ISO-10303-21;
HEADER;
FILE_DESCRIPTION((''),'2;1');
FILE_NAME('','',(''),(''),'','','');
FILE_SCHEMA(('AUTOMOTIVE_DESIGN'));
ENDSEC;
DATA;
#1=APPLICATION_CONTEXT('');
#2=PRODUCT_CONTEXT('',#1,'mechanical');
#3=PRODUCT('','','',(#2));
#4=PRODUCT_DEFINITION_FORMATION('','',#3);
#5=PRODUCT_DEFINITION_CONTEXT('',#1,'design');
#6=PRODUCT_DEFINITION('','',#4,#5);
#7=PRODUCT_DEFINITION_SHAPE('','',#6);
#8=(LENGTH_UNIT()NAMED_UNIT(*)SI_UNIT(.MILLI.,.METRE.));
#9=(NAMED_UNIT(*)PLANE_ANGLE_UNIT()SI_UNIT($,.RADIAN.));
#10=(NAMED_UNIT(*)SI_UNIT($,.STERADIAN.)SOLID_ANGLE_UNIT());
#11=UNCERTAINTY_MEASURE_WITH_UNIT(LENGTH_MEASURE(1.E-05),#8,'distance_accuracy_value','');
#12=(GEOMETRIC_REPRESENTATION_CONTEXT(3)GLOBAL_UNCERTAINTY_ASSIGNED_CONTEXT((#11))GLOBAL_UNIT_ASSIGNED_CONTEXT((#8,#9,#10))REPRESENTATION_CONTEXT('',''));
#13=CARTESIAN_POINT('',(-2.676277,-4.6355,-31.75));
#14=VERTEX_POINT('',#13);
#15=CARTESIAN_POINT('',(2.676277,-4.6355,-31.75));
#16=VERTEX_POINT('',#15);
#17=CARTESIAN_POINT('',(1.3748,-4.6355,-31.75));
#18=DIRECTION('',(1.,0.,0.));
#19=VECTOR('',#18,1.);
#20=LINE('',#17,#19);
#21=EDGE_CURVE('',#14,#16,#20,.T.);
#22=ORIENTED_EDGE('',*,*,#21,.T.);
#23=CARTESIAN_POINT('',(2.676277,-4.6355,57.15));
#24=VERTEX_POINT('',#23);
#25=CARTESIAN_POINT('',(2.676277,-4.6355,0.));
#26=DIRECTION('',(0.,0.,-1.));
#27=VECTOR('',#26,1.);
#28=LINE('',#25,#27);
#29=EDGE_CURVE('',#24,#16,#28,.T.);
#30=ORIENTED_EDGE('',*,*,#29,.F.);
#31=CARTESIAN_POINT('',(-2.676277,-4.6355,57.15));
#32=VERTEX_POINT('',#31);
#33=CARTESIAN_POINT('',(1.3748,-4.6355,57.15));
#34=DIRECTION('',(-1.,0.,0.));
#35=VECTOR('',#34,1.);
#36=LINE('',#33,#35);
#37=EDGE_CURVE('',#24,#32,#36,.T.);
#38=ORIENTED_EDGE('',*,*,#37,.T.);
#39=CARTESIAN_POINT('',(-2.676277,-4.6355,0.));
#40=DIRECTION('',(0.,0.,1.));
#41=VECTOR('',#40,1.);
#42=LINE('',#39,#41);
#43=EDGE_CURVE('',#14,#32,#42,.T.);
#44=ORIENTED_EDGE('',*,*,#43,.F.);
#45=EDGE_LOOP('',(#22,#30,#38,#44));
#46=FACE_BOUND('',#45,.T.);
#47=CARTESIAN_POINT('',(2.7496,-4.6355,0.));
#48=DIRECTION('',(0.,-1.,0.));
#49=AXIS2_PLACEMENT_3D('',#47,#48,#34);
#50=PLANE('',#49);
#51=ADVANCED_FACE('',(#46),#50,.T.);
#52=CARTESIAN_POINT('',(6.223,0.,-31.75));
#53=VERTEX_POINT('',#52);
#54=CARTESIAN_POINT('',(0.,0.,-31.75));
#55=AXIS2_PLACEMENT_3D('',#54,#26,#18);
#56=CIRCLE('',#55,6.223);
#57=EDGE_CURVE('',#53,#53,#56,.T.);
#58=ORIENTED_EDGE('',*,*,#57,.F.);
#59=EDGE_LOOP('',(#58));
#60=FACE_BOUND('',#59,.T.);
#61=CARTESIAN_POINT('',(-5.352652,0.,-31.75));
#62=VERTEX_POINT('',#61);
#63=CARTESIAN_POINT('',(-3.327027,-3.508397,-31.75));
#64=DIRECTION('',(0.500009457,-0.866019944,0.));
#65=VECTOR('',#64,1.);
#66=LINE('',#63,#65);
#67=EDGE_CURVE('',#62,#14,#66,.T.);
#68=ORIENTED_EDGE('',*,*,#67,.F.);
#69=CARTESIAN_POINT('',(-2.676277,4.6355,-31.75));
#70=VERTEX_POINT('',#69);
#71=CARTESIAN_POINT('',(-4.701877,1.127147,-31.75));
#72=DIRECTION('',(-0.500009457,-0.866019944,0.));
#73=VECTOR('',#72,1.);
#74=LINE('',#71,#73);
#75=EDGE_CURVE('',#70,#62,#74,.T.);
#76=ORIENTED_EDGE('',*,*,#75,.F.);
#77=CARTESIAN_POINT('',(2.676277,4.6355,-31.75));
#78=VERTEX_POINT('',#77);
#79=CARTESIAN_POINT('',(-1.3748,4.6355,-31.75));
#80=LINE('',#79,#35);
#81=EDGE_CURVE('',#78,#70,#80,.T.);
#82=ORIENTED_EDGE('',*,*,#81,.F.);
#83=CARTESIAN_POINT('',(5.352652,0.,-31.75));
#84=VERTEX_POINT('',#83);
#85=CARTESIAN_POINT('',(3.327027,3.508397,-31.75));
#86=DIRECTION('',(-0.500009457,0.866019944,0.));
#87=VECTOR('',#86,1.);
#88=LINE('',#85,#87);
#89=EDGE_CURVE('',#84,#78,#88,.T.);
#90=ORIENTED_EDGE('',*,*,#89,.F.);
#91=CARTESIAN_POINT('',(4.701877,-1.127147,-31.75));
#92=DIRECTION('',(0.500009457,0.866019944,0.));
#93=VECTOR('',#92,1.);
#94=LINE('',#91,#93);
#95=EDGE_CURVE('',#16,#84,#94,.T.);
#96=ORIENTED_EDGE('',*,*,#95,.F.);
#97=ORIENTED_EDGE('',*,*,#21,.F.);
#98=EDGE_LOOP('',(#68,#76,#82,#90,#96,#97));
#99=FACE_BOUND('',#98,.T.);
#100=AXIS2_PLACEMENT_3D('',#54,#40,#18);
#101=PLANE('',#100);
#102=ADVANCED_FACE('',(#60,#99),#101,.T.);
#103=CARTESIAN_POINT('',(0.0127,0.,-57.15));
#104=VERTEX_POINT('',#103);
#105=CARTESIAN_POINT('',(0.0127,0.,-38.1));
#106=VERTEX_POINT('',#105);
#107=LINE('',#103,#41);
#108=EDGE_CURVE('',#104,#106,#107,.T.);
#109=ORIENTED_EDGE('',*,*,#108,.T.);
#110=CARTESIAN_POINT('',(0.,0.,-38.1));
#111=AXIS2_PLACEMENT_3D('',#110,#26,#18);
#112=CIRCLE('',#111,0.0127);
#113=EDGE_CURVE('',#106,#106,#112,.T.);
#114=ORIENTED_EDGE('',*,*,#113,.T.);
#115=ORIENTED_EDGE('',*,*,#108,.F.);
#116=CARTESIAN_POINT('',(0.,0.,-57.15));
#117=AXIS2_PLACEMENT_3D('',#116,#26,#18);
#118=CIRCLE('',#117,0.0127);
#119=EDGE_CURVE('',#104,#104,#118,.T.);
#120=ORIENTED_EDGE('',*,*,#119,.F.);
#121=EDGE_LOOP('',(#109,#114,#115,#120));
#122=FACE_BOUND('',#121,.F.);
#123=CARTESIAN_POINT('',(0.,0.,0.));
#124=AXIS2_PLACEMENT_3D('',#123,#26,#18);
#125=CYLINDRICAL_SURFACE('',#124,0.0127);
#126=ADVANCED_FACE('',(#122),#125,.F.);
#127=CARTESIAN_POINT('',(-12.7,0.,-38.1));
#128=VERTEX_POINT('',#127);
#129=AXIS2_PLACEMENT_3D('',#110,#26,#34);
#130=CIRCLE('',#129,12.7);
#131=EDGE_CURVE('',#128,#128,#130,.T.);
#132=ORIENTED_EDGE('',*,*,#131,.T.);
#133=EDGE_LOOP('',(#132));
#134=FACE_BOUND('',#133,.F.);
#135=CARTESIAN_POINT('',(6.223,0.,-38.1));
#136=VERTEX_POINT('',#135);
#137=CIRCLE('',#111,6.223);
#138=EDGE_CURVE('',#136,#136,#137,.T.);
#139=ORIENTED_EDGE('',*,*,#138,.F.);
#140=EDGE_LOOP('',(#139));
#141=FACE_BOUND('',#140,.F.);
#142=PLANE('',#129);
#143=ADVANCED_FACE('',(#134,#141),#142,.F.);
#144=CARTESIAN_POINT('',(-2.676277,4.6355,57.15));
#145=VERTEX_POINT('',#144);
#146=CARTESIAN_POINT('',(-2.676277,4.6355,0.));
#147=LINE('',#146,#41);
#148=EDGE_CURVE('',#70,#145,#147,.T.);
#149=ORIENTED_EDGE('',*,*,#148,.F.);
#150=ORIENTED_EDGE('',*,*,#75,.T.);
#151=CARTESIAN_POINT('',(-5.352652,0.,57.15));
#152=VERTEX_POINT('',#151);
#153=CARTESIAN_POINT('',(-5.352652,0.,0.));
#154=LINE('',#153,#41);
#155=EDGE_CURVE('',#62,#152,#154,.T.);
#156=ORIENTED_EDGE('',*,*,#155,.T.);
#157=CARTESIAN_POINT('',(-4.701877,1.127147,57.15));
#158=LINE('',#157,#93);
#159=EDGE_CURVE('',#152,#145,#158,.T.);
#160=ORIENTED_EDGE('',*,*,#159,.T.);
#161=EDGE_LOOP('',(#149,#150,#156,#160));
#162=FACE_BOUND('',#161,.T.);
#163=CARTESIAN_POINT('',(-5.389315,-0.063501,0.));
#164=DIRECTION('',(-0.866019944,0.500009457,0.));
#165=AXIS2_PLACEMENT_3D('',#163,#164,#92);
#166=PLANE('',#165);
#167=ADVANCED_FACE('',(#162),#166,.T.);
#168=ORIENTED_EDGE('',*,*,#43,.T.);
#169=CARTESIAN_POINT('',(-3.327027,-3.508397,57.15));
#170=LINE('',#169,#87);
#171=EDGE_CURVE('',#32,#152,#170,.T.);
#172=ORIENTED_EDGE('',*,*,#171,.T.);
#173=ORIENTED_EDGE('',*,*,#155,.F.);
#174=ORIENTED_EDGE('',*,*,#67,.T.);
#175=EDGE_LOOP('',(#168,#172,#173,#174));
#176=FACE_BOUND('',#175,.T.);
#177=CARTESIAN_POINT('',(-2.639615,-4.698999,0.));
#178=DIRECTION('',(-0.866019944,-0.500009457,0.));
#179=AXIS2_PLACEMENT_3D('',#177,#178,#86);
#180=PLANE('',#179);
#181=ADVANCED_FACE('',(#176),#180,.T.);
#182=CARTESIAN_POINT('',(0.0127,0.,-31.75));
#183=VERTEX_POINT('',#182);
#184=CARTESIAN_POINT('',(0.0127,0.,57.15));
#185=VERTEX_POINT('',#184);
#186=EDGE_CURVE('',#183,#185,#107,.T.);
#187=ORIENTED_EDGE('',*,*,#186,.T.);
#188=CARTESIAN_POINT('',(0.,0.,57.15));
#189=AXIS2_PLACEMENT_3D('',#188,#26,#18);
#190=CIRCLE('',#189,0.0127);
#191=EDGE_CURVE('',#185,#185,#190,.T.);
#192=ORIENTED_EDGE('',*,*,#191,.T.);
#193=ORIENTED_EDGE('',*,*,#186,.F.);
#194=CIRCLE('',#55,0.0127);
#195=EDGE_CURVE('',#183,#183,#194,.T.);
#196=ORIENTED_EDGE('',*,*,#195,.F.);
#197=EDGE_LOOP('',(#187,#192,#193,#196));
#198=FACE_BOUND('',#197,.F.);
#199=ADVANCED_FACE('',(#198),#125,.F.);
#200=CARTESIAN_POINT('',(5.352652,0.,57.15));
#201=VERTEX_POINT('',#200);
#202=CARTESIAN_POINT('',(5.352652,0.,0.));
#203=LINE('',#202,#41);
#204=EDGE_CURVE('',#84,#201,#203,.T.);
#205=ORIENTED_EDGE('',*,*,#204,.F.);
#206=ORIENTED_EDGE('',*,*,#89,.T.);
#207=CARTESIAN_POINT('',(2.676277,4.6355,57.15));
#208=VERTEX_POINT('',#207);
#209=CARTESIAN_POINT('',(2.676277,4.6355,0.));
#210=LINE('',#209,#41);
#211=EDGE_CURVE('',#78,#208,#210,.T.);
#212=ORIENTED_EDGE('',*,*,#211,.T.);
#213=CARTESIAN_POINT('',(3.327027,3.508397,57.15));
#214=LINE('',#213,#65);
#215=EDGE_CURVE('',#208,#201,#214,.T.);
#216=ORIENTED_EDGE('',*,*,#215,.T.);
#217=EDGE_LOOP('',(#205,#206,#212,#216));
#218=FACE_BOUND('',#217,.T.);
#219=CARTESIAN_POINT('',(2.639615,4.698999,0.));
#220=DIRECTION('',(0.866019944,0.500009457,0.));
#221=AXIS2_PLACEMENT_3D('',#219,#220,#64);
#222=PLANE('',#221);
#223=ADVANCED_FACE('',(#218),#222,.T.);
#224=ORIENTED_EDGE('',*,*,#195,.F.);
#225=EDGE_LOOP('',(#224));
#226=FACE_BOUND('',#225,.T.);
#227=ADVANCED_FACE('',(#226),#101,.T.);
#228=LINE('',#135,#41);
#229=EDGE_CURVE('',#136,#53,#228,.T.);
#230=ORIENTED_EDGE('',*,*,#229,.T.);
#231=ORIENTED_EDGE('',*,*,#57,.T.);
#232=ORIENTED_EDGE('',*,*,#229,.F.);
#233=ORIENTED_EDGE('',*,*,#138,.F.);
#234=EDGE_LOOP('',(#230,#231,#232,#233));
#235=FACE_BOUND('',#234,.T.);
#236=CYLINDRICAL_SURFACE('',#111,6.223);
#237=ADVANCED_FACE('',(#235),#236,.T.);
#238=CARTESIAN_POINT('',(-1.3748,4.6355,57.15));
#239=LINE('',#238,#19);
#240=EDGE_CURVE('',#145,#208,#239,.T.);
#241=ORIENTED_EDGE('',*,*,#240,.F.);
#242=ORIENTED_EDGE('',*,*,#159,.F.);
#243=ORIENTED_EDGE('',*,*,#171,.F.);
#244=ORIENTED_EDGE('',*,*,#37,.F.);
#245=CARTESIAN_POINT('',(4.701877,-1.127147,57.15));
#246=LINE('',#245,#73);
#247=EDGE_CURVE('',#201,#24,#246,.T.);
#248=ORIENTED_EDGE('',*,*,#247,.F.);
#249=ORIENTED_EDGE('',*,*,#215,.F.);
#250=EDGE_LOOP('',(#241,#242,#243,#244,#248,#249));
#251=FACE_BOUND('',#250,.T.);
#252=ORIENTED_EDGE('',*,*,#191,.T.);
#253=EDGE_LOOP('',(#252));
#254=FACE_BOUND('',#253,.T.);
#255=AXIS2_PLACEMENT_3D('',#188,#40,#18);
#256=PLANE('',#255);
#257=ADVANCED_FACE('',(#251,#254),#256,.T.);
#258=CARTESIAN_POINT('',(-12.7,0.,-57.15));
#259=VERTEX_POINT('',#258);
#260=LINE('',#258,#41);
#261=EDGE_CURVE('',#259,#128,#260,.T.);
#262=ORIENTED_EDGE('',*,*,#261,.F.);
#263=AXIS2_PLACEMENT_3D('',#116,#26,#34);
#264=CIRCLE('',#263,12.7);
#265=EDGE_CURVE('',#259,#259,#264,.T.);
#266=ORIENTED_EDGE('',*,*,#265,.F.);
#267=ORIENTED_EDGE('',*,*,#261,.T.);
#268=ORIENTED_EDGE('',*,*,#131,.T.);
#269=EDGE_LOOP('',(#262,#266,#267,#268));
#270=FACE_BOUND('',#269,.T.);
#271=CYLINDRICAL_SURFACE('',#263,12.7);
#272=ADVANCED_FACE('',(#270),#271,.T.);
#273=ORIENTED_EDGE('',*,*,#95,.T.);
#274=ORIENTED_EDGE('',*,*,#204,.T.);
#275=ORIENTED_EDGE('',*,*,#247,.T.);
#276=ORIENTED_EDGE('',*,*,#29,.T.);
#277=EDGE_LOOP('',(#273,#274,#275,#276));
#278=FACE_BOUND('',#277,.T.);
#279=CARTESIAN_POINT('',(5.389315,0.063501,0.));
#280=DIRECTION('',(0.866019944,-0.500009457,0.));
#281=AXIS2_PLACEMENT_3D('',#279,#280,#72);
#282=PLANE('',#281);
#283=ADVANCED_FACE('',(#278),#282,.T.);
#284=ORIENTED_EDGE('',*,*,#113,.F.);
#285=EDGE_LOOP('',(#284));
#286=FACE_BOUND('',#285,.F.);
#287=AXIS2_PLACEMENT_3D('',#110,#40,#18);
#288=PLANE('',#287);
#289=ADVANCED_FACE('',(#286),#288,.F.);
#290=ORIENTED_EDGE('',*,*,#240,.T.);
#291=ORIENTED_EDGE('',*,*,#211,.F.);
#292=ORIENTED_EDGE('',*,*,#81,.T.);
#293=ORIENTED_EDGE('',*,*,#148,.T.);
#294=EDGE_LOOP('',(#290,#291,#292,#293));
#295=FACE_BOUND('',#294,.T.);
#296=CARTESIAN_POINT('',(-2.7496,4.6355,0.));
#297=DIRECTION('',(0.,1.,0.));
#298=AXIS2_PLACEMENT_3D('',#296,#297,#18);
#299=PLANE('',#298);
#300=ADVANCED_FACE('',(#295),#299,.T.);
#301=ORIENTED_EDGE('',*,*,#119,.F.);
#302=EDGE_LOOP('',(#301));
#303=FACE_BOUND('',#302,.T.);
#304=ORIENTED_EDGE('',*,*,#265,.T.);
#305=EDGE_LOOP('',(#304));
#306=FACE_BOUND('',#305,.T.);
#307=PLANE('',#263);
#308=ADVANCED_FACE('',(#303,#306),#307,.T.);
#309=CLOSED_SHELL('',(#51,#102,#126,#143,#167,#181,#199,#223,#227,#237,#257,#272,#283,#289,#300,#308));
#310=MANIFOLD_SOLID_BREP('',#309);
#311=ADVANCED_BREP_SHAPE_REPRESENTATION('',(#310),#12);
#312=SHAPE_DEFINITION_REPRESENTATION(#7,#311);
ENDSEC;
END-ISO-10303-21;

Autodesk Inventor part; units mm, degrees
ref_plane "YZ Plane" through (0, 0, 0) normal (1, 0, 0) x (0, 1, 0)
ref_plane "XZ Plane" through (0, 0, 0) normal (0, 1, 0) x (-1, 0, 0)
ref_plane "XY Plane" through (0, 0, 0) normal (0, 0, 1) x (1, 0, 0)
sketch "Sketch1" plane through (0, 0, 0) normal (0, 0, 1) x (1, 0, 0)
  line L0 (5.4993, 0) -> (2.7496, -4.7625)
  line L1 (2.7496, -4.7625) -> (-2.7496, -4.7625)
  line L2 (-2.7496, -4.7625) -> (-5.4993, 0)
  line L3 (-5.4993, 0) -> (-2.7496, 4.7625)
  line L4 (-2.7496, 4.7625) -> (2.7496, 4.7625)
  line L5 (2.7496, 4.7625) -> (5.4993, 0)
  circle A0 centre (0, 0) radius 0.0127
  dimension "d0" = 9.525
  dimension "d6" = 0.0254
extrude "Extrusion2" add sketch "Sketch1" along normal mid plane 114.3
sketch "Sketch4" plane through (0, 0, -57.15) normal (0, 0, -1) x (-1, 0, 0)
  circle A0 centre (0, 0) radius 0.0127 projected
  circle A1 centre (0, 0) radius 12.7
  dimension "d10" = 25.4
extrude "Extrusion4" add sketch "Sketch4" against normal blind 19.05
thicken "Reduce Hex Shaft" operation add thickness 0.127 both sides no extend neighbours yes toward (0, -1, 0) faces at (0.9165, 4.7625, -6.35) (4.5827, 1.5875, -6.35) (3.6662, -3.175, -6.35) (-3.6662, 3.175, -6.35) (-4.5827, -1.5875, -6.35) (-0.9165, -4.7625, -6.35)
sketch "Sketch5" plane through (0, 0, -38.1) normal (0, 0, 1) x (1, 0, 0)
  circle A0 centre (0, 0) radius 6.35
  dimension "d15" = 12.7
extrude "Extrusion5" add sketch "Sketch5" along normal blind 6.35
thicken "Reduce Base Bushing" operation add thickness 0.127 both sides no extend neighbours yes toward (-0.9967573, 0.0804666, 0) faces at (6.3294, -0.511, -33.8667)
equation "\"d0\" = hexSize"
equation "\"d4\" = length"
equation "\"d13\" = printOffset"
equation "\"d14\" = printOffset"
equation "\"d15\" = bushingForBaseHole"
equation "\"d16\" = sideOfBase"
equation "\"d20\" = printOffset"
equation "\"d21\" = printOffset"
equation "\"hexSize\" = 9.525"
equation "\"length\" = 114.3"
equation "\"printOffset\" = 0.127"
equation "\"bushingForBaseHole\" = 12.7"
equation "\"sideOfBase\" = 6.35"
properties part number "3_8x4_5-inchHexShaft" material "PC/ABS Plastic"
